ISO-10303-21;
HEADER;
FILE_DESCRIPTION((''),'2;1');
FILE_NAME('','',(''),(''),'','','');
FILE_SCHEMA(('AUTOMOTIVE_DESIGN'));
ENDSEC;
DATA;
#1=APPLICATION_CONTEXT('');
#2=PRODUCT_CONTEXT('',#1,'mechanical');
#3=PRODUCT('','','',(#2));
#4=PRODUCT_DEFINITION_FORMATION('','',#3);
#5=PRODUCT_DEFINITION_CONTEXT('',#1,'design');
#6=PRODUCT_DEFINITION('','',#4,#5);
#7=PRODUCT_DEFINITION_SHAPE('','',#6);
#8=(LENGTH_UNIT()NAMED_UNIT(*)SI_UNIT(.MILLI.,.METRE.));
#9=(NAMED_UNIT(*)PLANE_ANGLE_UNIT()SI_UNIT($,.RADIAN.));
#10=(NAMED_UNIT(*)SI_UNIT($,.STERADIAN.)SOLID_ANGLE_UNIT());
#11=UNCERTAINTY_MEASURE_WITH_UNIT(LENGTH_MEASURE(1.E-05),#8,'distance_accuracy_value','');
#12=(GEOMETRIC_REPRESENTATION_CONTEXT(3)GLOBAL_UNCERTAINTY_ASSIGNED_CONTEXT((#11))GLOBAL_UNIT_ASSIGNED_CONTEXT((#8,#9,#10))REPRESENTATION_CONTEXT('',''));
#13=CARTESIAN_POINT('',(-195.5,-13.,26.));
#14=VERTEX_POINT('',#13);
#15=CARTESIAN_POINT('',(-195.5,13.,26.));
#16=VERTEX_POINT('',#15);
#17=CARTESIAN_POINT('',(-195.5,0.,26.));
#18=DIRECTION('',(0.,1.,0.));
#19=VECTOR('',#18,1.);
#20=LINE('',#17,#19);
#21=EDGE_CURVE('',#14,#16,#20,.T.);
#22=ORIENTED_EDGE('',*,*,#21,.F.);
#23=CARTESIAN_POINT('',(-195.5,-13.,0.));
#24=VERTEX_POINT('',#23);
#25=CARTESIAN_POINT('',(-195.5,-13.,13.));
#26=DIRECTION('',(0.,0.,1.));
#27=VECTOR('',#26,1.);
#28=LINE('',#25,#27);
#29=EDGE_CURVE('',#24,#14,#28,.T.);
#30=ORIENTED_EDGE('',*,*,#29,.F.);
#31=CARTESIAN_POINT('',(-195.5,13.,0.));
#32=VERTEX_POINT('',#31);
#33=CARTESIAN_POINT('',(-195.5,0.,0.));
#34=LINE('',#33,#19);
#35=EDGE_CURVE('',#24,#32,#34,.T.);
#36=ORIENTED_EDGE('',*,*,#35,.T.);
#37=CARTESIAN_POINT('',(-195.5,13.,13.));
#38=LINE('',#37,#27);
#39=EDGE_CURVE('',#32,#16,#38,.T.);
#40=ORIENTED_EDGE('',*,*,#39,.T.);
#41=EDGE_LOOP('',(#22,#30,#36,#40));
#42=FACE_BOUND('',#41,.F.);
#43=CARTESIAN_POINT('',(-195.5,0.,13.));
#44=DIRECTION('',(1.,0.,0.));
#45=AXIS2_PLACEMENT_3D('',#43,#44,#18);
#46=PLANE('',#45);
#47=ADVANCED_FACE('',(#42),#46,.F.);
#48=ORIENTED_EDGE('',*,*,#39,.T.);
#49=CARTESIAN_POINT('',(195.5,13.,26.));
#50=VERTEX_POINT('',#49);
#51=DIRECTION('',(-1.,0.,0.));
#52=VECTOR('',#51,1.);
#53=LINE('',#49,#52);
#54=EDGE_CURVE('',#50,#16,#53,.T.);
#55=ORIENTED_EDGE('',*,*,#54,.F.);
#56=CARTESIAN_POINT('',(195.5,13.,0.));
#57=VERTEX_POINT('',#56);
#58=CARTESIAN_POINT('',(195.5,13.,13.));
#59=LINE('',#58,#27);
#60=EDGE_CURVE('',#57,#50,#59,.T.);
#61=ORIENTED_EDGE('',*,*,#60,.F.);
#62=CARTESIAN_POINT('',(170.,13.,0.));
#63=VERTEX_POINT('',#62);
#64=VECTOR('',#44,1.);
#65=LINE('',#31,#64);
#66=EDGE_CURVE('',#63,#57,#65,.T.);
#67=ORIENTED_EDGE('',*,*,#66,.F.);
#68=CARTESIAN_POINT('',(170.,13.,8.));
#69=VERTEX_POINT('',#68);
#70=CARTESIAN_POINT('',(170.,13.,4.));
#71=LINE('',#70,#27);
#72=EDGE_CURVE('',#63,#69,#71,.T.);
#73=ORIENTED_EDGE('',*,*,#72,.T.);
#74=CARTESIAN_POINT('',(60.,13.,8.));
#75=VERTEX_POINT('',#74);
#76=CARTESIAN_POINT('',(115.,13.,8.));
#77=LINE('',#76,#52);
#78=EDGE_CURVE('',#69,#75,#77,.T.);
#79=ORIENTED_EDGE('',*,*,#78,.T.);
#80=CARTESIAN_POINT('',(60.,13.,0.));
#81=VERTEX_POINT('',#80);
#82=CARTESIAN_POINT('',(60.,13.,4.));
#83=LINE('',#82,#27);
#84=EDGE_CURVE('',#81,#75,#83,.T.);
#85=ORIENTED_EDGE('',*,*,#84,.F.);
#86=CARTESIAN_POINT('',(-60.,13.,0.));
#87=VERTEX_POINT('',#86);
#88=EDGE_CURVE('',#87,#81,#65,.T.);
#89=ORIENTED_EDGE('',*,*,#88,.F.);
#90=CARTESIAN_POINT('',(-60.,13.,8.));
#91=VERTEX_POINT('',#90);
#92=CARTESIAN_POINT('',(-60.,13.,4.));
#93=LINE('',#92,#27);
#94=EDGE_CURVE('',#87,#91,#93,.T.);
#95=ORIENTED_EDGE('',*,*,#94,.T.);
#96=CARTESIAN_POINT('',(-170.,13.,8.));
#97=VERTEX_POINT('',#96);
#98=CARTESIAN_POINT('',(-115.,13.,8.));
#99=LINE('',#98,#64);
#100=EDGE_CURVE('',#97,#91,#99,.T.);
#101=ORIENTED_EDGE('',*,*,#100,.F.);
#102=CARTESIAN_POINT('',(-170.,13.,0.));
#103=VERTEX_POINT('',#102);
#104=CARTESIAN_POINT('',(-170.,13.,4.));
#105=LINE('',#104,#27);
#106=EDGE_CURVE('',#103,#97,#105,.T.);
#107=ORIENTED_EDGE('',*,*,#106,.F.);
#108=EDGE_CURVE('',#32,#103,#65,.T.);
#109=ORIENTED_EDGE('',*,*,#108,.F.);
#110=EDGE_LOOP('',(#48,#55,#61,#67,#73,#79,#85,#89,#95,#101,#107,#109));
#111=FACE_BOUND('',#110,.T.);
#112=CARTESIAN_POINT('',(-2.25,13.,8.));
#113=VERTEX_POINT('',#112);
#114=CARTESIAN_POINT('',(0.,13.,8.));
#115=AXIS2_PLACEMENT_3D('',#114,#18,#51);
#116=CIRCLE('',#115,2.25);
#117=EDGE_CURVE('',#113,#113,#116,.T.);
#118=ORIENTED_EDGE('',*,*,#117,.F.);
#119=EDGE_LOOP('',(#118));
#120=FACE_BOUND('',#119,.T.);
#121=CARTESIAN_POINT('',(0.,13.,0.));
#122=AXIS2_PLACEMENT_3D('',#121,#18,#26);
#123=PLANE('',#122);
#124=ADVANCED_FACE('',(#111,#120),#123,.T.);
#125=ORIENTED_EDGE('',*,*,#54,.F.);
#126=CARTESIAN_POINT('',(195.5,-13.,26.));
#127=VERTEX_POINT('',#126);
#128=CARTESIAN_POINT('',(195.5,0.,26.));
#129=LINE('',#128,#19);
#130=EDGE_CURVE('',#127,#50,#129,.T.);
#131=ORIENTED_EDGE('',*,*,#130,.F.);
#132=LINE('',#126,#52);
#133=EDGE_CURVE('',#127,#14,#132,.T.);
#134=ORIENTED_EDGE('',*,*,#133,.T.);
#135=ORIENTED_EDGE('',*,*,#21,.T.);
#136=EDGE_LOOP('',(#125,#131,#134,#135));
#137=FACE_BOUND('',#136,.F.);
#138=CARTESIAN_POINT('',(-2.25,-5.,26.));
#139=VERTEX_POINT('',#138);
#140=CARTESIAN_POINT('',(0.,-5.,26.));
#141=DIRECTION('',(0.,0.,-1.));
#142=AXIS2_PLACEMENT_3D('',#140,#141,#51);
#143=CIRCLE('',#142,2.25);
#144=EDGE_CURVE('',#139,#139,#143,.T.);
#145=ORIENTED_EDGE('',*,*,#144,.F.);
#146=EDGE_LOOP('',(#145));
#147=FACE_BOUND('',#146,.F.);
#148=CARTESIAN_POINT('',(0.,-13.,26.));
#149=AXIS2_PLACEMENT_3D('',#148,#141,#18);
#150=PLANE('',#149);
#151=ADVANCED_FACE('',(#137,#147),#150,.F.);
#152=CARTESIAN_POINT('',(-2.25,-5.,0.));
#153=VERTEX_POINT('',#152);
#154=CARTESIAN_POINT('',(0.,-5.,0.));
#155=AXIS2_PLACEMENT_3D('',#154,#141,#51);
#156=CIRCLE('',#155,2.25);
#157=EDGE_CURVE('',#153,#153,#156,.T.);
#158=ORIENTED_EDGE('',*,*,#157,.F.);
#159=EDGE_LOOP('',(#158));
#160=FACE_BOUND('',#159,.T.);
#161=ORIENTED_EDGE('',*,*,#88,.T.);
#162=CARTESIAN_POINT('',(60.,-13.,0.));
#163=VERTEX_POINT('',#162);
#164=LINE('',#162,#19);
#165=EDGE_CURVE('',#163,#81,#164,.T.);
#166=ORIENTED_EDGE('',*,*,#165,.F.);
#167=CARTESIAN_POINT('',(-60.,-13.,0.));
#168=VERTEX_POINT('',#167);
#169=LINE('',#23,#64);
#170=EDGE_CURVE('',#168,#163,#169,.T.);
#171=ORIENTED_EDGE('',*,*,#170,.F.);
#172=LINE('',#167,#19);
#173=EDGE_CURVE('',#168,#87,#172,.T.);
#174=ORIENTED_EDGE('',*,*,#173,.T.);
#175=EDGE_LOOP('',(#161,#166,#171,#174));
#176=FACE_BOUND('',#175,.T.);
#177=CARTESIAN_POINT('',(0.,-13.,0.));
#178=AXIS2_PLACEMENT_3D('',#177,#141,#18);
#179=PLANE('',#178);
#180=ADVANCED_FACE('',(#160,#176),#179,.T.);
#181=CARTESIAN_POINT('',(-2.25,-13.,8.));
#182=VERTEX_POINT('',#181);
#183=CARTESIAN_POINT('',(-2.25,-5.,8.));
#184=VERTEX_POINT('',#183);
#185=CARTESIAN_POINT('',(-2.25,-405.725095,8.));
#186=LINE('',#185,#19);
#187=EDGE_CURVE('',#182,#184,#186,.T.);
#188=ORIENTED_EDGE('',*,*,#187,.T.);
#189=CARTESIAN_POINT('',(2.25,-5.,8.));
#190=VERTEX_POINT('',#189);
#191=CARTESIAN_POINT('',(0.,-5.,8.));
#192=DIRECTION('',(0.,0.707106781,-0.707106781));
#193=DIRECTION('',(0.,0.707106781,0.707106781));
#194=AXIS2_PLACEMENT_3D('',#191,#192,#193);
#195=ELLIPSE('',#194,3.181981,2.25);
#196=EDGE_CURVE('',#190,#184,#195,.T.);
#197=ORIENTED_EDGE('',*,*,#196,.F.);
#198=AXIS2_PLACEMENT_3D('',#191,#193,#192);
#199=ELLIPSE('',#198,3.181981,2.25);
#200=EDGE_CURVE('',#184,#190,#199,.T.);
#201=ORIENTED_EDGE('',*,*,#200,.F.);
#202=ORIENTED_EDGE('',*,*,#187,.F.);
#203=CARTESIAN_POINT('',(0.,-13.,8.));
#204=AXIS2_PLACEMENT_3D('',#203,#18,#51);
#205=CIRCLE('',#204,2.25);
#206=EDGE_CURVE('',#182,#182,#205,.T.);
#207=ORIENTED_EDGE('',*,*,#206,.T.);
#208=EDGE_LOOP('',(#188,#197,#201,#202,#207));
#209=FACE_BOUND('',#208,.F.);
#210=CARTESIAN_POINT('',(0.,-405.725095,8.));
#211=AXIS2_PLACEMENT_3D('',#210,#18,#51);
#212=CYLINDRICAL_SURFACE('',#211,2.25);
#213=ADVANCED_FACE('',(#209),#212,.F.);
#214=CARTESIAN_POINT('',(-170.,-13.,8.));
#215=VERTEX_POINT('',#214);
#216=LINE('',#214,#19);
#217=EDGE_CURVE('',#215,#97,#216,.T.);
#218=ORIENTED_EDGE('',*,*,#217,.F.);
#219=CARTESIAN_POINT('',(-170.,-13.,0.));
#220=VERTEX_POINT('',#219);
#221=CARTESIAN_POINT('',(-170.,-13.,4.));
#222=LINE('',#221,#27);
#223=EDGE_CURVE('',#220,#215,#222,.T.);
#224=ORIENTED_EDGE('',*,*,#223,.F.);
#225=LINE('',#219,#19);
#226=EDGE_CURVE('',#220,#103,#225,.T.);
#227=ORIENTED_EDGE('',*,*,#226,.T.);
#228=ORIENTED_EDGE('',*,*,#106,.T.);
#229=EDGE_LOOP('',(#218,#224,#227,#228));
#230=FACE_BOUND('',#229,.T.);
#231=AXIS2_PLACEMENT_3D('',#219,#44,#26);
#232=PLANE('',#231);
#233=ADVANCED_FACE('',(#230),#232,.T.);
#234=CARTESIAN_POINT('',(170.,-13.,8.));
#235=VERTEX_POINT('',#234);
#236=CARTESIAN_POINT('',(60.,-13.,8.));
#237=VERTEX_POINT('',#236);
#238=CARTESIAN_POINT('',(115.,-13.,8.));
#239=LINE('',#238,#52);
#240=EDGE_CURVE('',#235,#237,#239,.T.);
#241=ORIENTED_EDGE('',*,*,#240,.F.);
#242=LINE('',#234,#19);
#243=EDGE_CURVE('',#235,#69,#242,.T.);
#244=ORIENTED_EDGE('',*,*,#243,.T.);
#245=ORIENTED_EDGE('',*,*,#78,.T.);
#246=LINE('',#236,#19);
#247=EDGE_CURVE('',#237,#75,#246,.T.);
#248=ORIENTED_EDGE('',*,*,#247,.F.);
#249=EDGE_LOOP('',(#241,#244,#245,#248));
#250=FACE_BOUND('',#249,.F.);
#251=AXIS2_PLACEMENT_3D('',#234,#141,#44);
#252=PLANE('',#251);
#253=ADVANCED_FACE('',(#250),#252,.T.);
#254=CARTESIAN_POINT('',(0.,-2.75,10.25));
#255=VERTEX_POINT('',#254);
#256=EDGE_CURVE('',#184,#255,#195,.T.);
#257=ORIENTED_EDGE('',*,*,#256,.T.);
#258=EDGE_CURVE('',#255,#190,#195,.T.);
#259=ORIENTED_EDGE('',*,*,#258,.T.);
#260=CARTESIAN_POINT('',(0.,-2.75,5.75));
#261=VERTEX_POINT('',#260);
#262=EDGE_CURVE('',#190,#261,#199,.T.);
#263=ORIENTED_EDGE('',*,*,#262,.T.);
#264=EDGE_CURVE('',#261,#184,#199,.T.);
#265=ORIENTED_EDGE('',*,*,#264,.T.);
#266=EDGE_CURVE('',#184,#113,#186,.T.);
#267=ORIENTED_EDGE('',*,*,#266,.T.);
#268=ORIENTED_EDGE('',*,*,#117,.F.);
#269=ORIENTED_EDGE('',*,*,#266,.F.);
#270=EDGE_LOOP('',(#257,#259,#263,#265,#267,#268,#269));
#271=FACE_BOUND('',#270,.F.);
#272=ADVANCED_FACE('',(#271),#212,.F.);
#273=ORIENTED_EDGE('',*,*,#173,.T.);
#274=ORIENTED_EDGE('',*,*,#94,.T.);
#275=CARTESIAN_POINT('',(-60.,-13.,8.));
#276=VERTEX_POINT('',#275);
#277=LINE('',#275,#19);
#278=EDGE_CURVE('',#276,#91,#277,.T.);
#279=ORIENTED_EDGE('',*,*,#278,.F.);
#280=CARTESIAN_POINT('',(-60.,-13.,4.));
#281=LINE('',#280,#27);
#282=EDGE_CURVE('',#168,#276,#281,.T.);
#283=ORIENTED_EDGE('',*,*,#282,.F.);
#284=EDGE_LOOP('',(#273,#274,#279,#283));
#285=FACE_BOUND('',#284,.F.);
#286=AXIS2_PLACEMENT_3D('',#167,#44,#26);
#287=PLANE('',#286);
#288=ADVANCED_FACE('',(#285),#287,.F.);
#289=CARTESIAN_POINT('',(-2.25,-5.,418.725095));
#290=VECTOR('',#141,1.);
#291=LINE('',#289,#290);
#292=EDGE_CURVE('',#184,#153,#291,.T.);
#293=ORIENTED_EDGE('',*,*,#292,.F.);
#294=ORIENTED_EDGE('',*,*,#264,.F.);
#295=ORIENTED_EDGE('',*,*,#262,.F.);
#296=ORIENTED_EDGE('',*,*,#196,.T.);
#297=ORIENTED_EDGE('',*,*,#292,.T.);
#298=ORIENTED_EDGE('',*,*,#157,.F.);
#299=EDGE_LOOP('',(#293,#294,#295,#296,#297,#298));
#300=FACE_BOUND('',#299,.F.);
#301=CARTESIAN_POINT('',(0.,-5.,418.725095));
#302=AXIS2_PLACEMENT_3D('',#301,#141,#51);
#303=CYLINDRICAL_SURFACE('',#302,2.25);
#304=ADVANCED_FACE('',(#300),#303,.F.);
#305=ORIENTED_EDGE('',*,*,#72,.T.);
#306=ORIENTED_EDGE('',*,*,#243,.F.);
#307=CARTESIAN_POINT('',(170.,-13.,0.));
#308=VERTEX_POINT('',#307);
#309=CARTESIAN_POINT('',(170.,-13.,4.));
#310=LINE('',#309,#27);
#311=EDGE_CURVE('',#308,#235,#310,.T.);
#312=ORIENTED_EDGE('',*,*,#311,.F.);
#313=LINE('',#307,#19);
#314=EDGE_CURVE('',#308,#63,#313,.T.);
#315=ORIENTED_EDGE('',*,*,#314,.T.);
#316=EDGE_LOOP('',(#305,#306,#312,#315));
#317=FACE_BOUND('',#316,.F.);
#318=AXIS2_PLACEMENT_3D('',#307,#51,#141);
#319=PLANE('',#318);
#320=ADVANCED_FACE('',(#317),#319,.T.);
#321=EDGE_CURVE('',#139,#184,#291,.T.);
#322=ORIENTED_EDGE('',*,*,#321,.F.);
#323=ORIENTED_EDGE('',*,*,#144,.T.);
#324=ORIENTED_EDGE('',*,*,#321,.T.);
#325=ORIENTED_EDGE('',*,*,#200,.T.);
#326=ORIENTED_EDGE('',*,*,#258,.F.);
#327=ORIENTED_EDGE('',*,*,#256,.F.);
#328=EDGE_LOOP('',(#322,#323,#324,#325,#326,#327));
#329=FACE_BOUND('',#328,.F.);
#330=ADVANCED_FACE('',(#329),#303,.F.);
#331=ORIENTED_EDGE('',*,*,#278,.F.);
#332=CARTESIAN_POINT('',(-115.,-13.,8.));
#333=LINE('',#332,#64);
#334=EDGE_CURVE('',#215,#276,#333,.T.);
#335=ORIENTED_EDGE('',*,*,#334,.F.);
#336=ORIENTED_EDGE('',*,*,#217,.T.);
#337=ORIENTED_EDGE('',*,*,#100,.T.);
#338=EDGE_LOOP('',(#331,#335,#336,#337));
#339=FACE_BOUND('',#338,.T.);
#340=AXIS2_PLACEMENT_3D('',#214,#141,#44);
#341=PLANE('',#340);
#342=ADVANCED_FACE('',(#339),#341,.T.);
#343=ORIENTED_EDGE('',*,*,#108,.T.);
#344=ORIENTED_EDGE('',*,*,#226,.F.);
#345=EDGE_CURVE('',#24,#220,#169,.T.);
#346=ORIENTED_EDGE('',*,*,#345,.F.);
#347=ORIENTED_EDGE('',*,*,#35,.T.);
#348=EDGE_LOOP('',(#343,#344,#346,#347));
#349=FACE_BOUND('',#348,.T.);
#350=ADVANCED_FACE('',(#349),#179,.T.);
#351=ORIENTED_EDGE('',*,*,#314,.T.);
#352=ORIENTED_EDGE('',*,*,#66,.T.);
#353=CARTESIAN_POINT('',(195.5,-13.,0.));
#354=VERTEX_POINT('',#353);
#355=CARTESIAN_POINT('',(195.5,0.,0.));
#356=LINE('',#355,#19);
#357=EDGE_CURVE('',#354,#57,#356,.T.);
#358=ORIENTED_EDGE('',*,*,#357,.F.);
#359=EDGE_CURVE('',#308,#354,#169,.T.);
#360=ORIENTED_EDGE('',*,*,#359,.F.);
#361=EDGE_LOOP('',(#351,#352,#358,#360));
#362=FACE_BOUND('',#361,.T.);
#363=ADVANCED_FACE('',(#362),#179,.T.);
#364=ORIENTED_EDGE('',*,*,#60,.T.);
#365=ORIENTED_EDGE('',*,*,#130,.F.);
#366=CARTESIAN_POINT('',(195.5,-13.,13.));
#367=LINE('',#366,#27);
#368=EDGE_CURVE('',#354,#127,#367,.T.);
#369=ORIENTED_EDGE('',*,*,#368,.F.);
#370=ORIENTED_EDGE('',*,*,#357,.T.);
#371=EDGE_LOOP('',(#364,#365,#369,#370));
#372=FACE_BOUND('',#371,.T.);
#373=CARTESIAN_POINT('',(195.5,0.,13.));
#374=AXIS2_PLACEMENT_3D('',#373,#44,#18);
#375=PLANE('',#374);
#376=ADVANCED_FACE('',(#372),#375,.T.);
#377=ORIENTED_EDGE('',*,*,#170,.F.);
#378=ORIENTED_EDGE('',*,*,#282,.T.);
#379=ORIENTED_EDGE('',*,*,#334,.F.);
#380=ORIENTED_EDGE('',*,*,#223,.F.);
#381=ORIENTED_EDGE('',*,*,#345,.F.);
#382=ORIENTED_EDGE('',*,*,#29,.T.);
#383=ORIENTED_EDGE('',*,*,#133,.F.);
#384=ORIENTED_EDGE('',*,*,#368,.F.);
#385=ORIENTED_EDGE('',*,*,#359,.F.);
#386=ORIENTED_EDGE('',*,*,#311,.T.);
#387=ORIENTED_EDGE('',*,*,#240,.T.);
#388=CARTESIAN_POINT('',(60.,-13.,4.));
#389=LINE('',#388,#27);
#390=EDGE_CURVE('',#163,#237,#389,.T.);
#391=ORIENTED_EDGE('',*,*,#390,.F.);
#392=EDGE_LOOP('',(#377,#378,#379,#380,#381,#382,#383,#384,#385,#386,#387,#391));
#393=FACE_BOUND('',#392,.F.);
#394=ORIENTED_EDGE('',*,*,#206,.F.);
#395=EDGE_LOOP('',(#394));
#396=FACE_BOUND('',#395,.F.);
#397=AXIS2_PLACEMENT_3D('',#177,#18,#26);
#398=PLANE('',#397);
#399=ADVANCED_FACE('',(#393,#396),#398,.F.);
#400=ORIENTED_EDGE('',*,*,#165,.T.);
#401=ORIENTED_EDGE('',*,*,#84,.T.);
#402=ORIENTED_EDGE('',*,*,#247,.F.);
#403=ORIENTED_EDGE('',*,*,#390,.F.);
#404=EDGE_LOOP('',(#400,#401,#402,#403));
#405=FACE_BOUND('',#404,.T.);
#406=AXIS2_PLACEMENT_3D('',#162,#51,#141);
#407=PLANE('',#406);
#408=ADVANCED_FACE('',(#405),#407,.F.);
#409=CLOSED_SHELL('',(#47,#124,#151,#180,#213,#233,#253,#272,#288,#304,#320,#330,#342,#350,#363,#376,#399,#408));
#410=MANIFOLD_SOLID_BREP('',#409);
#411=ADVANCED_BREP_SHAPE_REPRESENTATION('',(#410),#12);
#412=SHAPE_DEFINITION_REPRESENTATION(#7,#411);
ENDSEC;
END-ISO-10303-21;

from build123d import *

# Parameters (mm, degrees)
F0_W     = 26
F0_H     = 26
F1_DEPTH = 195.5
F3_W     = 110
F3_H     = 8
F4_DEPTH = 26
F6_D     = 4.5
F8_D     = 4.5


# Not quite as in the source:
# - a pattern or mirror of a feature is missing from the dataset's text; its kind, count and spacing are read off the source's solid


with BuildPart() as f1:
    # F0 (on Right) → F1 (new body, symmetric)
    with BuildSketch(Plane.YZ):
        with Locations((0, 13)):
            Rectangle(F0_W, F0_H)
    extrude(amount=F1_DEPTH, both=True)

    # F3 (on face) → F4 (cut, through all)
    with BuildSketch(Plane.XZ.offset(13)):
        with Locations((-115, 4)):
            Rectangle(F3_W, F3_H)
    f4 = extrude(amount=-F4_DEPTH, mode=Mode.SUBTRACT)

    # F4_copies: F4 across plane
    add(f4.mirror(Plane(origin=(0, 0, 0), x_dir=(0, 0, 1), z_dir=(1, 0, 0))), mode=Mode.SUBTRACT)

    # F6 (through all)
    with Locations(Plane.XZ.offset(13)):
        with Locations((0, 8)):
            Hole(F6_D / 2)

    # F8 (through all)
    with Locations(Plane.XY.offset(26)):
        with Locations((0, -5)):
            Hole(F8_D / 2)


solid = f1.part
